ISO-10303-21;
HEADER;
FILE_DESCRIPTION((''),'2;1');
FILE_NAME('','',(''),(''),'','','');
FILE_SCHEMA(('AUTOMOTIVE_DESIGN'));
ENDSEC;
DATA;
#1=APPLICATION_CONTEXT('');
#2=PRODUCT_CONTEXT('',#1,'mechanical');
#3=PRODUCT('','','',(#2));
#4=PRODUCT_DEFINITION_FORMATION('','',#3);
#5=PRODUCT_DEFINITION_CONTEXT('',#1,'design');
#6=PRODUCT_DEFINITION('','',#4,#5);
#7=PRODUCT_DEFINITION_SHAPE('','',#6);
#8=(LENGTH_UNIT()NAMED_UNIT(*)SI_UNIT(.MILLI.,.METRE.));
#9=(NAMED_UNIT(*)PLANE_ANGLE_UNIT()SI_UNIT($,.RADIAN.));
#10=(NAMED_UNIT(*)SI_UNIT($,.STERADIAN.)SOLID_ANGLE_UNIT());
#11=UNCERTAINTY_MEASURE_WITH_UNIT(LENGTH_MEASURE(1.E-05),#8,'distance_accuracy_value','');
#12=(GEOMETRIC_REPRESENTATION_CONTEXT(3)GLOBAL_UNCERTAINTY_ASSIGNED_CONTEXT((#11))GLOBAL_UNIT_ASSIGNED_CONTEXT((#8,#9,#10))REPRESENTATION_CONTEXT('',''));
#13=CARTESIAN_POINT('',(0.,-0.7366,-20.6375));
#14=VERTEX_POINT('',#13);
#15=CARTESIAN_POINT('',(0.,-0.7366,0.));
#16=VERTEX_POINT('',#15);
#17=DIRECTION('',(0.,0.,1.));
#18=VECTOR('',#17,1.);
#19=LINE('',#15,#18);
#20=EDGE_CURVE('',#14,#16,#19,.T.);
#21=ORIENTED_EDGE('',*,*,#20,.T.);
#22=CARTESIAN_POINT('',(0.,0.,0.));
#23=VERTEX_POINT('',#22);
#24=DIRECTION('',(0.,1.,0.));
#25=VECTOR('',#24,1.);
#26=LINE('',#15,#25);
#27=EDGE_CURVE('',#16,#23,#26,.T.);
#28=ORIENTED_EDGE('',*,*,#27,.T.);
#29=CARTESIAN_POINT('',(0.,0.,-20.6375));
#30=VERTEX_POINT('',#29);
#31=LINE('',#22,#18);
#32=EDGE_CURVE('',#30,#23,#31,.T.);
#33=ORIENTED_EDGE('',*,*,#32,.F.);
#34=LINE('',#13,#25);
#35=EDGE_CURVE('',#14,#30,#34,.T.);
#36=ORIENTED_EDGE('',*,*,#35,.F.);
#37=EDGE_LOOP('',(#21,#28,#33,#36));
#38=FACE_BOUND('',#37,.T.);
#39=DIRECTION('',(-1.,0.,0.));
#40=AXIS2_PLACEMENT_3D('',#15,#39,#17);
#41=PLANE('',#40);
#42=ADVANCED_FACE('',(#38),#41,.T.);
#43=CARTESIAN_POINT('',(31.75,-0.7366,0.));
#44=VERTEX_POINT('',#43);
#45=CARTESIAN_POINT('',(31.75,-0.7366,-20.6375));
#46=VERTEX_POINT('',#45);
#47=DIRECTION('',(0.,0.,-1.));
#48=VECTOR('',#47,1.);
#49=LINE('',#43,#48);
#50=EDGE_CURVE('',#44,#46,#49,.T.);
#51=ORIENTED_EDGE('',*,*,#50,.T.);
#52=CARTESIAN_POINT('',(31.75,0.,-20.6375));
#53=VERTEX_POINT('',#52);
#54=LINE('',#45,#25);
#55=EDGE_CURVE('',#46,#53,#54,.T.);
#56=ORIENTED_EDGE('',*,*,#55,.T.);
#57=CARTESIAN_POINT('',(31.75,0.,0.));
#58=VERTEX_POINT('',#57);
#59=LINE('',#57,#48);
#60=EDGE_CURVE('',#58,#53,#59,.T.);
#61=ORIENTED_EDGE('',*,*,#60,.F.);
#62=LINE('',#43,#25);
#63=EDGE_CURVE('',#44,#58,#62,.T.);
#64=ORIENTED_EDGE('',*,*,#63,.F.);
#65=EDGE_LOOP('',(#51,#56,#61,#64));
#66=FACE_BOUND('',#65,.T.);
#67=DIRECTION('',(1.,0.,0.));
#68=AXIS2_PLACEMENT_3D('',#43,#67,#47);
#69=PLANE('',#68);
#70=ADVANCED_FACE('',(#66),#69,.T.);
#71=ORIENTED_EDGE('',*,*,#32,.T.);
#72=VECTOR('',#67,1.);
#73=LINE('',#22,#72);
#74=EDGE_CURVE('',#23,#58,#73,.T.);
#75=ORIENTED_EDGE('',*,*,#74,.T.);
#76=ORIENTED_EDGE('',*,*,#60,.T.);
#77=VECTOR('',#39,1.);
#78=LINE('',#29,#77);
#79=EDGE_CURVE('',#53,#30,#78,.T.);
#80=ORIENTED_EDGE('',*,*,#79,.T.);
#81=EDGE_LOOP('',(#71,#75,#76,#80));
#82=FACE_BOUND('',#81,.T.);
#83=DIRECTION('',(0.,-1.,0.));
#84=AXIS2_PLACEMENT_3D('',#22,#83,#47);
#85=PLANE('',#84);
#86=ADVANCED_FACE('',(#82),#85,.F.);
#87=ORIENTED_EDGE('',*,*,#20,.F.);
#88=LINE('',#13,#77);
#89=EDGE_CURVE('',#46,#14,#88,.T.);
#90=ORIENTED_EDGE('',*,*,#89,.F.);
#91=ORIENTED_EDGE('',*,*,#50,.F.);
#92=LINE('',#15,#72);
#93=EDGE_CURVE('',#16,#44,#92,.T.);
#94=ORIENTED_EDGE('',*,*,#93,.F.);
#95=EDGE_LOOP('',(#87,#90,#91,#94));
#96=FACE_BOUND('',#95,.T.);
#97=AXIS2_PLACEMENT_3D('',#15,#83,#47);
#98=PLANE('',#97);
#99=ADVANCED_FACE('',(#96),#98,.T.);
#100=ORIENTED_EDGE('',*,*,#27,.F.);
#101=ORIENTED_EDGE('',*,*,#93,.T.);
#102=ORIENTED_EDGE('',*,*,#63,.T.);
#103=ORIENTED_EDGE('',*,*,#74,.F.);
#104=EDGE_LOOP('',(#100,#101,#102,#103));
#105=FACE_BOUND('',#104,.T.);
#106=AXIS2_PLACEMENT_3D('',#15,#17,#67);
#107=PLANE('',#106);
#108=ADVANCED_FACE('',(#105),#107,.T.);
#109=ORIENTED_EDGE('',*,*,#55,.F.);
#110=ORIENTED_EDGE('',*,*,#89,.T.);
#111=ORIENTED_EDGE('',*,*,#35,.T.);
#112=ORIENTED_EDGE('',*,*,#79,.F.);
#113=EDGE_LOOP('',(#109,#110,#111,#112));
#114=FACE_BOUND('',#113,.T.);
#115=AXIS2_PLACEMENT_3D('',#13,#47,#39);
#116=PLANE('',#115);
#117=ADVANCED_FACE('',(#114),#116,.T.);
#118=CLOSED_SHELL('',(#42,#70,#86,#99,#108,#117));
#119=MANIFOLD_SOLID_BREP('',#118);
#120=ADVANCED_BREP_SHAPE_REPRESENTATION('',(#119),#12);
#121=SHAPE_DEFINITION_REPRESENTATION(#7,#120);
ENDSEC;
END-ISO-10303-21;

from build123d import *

# Parameters (mm, degrees)
SKETCH1_W          = 31.75
SKETCH1_H          = 20.6375
BASE_FLANGE1_DEPTH = 0.7366


# Sheet-metal steps are written as plain solids
with BuildPart() as part:
    # Sketch1 → Base-Flange1 (new body)
    with BuildSketch(Plane(origin=(0, 0, 0), x_dir=(1, 0, 0), z_dir=(0, 1, 0))):
        with Locations((15.875, 10.31875)):
            Rectangle(SKETCH1_W, SKETCH1_H)
    extrude(amount=-BASE_FLANGE1_DEPTH)


solid = part.part
